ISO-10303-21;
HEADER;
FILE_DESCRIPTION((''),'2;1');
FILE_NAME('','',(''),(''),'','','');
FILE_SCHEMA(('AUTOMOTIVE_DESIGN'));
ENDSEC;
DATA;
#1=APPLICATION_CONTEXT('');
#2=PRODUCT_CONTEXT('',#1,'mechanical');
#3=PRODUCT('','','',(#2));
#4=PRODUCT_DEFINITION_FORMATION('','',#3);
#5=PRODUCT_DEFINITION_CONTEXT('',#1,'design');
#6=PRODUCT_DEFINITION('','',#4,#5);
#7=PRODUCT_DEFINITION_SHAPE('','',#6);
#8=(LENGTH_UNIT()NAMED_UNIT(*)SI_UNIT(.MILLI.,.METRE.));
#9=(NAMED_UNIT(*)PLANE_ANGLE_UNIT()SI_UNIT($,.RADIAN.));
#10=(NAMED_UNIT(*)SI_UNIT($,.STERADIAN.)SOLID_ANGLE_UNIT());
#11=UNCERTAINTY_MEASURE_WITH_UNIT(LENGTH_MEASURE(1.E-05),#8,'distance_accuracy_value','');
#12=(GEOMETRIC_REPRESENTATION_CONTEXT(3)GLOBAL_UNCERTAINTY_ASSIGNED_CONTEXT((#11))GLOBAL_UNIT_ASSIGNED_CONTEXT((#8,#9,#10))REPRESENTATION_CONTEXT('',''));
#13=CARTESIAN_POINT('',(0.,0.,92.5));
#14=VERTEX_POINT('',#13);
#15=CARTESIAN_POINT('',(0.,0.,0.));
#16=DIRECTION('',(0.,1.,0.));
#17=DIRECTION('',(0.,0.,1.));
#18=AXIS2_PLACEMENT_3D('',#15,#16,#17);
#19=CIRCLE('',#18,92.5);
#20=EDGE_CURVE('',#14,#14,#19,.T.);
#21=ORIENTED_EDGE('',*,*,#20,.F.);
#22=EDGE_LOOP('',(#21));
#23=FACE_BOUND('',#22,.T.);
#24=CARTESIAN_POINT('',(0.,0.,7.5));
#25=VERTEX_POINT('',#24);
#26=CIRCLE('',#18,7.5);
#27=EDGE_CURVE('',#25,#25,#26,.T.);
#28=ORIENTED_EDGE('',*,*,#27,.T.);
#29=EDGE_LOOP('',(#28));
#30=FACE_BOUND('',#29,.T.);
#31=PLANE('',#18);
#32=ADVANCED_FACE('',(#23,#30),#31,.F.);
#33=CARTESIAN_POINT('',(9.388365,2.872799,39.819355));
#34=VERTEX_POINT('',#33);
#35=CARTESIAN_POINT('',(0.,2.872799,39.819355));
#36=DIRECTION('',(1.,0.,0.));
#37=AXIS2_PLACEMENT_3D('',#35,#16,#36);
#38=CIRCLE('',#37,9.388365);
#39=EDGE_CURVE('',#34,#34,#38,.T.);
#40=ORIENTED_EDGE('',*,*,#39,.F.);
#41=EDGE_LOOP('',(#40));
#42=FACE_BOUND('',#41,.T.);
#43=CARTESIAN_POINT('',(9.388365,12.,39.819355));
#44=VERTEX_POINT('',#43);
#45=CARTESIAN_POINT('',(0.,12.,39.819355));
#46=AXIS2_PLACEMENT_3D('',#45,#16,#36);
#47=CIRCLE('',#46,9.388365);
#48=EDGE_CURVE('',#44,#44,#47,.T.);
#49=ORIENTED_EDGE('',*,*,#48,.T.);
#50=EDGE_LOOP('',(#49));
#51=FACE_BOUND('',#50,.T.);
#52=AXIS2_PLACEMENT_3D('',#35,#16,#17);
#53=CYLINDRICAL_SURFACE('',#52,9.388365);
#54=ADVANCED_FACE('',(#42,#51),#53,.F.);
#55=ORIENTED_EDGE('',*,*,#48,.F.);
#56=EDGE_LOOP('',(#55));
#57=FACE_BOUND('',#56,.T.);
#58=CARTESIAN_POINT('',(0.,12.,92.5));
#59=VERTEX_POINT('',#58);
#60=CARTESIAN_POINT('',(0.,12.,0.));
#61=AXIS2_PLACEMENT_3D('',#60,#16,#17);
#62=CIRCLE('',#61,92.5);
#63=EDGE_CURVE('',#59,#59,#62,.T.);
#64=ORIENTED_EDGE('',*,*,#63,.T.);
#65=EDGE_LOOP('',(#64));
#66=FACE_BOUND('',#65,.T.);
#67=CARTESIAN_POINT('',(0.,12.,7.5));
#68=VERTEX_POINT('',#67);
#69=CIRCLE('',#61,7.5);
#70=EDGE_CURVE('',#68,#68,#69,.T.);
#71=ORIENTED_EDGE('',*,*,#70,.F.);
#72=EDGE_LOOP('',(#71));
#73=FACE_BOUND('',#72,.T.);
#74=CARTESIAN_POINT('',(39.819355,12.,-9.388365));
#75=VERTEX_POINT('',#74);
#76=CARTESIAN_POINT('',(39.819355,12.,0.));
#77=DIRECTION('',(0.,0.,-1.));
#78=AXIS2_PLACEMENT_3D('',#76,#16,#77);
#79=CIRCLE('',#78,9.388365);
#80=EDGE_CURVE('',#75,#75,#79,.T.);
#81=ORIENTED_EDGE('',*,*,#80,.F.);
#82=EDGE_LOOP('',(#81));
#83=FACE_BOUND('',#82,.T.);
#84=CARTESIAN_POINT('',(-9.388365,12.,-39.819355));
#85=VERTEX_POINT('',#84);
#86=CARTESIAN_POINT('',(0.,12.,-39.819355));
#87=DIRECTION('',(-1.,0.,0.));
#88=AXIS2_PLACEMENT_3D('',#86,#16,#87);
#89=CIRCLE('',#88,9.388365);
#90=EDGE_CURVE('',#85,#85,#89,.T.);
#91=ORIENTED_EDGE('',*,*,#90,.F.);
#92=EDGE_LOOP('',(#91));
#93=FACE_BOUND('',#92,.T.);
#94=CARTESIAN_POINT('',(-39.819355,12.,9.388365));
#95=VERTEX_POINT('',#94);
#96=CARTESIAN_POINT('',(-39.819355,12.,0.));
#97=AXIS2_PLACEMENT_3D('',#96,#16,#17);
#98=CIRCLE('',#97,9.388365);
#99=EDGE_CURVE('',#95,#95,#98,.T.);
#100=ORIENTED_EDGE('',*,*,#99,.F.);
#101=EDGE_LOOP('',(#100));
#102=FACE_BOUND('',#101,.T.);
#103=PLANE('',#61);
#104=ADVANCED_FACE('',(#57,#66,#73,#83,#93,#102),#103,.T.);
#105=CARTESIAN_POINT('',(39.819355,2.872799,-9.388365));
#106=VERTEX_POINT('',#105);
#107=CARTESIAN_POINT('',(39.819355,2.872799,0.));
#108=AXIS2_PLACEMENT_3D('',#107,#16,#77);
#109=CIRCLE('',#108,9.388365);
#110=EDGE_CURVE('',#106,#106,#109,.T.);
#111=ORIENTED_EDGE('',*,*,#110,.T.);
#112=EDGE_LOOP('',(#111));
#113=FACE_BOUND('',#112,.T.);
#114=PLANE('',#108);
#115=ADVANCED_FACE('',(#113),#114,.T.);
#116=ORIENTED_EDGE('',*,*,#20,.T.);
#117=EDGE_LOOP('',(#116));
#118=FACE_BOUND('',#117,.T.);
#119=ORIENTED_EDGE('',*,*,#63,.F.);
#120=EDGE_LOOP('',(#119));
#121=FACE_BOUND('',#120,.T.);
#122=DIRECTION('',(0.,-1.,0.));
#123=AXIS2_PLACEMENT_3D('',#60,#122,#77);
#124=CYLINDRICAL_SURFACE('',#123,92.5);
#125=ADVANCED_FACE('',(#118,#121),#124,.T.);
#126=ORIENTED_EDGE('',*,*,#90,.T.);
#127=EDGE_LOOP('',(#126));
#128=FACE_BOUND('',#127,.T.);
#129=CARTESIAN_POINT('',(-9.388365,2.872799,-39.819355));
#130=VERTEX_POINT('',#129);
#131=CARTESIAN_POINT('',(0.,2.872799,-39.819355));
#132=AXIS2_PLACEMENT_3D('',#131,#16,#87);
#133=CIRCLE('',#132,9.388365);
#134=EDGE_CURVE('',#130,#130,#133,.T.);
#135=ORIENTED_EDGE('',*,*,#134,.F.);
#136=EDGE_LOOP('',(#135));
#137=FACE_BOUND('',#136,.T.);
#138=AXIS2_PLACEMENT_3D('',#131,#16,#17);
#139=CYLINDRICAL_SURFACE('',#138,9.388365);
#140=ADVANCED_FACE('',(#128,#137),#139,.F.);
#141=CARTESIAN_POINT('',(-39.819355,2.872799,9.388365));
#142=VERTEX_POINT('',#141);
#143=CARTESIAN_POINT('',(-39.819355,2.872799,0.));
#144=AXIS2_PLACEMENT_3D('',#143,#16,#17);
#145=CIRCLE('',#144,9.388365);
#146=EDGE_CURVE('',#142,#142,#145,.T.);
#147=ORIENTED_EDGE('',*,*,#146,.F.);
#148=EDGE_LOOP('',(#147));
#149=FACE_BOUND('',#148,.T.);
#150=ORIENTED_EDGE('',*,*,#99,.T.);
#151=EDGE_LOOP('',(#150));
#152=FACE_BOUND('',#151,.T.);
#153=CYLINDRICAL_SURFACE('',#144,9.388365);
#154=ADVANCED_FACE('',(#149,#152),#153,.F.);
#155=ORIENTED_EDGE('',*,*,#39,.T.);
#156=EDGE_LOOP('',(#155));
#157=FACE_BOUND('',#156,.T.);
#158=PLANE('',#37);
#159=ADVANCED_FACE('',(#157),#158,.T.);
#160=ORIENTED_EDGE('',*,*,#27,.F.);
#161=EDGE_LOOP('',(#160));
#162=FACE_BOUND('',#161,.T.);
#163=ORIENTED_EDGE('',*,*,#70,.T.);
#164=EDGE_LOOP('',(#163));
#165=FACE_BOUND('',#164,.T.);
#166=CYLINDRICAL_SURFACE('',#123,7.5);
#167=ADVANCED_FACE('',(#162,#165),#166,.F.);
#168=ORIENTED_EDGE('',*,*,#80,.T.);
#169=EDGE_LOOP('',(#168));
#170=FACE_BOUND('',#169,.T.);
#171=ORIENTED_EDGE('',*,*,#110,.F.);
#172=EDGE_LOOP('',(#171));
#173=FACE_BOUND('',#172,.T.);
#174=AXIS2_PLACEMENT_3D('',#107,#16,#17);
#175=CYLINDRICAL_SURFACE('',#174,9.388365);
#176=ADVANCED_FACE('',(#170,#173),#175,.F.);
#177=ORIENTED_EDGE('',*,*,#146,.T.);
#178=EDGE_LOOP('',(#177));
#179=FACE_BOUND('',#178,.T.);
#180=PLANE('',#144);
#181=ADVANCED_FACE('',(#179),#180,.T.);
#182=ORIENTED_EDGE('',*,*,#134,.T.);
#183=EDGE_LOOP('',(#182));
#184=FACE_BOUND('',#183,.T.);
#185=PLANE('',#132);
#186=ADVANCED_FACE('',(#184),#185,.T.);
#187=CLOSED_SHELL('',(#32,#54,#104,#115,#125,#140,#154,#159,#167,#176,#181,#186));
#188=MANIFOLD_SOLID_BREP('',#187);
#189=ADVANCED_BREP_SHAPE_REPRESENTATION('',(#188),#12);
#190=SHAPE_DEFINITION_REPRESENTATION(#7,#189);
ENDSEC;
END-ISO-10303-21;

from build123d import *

# Parameters (mm, degrees)
SKETCH1_R           = 92.5
BOSS_EXTRUDE1_DEPTH = 12
SKETCH2_R           = 7.5
CUT_EXTRUDE1_DEPTH  = 132.363998112
SKETCH3_R           = 9.388365159
CUT_EXTRUDE2_DEPTH  = 9.127200818
CIRPATTERN1_COUNT   = 4


with BuildPart() as part:
    # Sketch1 → Boss-Extrude1 (new body)
    with BuildSketch(Plane(origin=(0, 0, 0), x_dir=(1, 0, 0), z_dir=(0, 1, 0))):
        Circle(SKETCH1_R)
    extrude(amount=BOSS_EXTRUDE1_DEPTH)

    # Sketch2 → Cut-Extrude1 (cut, through all)
    with BuildSketch(Plane(origin=(0, 0, 0), x_dir=(1, 0, 0), z_dir=(0, 1, 0))):
        Circle(SKETCH2_R)
    extrude(amount=CUT_EXTRUDE1_DEPTH, mode=Mode.SUBTRACT)

    # Sketch3 → Cut-Extrude2 (cut)
    with BuildSketch(Plane(origin=(0, 12, 0), x_dir=(1, 0, 0), z_dir=(0, 1, 0))):
        with Locations((-39.819354828, 0)):
            Circle(SKETCH3_R)
    cut_extrude2 = extrude(amount=-CUT_EXTRUDE2_DEPTH, mode=Mode.SUBTRACT)

    # CirPattern1: Cut-Extrude2 ×4 about axis
    cirpattern1_axis = Axis((0, 0, 0), (0, 1, 0))
    for i in range(1, CIRPATTERN1_COUNT):
        add(cut_extrude2.rotate(cirpattern1_axis, i * 360 / CIRPATTERN1_COUNT), mode=Mode.SUBTRACT)


solid = part.part
